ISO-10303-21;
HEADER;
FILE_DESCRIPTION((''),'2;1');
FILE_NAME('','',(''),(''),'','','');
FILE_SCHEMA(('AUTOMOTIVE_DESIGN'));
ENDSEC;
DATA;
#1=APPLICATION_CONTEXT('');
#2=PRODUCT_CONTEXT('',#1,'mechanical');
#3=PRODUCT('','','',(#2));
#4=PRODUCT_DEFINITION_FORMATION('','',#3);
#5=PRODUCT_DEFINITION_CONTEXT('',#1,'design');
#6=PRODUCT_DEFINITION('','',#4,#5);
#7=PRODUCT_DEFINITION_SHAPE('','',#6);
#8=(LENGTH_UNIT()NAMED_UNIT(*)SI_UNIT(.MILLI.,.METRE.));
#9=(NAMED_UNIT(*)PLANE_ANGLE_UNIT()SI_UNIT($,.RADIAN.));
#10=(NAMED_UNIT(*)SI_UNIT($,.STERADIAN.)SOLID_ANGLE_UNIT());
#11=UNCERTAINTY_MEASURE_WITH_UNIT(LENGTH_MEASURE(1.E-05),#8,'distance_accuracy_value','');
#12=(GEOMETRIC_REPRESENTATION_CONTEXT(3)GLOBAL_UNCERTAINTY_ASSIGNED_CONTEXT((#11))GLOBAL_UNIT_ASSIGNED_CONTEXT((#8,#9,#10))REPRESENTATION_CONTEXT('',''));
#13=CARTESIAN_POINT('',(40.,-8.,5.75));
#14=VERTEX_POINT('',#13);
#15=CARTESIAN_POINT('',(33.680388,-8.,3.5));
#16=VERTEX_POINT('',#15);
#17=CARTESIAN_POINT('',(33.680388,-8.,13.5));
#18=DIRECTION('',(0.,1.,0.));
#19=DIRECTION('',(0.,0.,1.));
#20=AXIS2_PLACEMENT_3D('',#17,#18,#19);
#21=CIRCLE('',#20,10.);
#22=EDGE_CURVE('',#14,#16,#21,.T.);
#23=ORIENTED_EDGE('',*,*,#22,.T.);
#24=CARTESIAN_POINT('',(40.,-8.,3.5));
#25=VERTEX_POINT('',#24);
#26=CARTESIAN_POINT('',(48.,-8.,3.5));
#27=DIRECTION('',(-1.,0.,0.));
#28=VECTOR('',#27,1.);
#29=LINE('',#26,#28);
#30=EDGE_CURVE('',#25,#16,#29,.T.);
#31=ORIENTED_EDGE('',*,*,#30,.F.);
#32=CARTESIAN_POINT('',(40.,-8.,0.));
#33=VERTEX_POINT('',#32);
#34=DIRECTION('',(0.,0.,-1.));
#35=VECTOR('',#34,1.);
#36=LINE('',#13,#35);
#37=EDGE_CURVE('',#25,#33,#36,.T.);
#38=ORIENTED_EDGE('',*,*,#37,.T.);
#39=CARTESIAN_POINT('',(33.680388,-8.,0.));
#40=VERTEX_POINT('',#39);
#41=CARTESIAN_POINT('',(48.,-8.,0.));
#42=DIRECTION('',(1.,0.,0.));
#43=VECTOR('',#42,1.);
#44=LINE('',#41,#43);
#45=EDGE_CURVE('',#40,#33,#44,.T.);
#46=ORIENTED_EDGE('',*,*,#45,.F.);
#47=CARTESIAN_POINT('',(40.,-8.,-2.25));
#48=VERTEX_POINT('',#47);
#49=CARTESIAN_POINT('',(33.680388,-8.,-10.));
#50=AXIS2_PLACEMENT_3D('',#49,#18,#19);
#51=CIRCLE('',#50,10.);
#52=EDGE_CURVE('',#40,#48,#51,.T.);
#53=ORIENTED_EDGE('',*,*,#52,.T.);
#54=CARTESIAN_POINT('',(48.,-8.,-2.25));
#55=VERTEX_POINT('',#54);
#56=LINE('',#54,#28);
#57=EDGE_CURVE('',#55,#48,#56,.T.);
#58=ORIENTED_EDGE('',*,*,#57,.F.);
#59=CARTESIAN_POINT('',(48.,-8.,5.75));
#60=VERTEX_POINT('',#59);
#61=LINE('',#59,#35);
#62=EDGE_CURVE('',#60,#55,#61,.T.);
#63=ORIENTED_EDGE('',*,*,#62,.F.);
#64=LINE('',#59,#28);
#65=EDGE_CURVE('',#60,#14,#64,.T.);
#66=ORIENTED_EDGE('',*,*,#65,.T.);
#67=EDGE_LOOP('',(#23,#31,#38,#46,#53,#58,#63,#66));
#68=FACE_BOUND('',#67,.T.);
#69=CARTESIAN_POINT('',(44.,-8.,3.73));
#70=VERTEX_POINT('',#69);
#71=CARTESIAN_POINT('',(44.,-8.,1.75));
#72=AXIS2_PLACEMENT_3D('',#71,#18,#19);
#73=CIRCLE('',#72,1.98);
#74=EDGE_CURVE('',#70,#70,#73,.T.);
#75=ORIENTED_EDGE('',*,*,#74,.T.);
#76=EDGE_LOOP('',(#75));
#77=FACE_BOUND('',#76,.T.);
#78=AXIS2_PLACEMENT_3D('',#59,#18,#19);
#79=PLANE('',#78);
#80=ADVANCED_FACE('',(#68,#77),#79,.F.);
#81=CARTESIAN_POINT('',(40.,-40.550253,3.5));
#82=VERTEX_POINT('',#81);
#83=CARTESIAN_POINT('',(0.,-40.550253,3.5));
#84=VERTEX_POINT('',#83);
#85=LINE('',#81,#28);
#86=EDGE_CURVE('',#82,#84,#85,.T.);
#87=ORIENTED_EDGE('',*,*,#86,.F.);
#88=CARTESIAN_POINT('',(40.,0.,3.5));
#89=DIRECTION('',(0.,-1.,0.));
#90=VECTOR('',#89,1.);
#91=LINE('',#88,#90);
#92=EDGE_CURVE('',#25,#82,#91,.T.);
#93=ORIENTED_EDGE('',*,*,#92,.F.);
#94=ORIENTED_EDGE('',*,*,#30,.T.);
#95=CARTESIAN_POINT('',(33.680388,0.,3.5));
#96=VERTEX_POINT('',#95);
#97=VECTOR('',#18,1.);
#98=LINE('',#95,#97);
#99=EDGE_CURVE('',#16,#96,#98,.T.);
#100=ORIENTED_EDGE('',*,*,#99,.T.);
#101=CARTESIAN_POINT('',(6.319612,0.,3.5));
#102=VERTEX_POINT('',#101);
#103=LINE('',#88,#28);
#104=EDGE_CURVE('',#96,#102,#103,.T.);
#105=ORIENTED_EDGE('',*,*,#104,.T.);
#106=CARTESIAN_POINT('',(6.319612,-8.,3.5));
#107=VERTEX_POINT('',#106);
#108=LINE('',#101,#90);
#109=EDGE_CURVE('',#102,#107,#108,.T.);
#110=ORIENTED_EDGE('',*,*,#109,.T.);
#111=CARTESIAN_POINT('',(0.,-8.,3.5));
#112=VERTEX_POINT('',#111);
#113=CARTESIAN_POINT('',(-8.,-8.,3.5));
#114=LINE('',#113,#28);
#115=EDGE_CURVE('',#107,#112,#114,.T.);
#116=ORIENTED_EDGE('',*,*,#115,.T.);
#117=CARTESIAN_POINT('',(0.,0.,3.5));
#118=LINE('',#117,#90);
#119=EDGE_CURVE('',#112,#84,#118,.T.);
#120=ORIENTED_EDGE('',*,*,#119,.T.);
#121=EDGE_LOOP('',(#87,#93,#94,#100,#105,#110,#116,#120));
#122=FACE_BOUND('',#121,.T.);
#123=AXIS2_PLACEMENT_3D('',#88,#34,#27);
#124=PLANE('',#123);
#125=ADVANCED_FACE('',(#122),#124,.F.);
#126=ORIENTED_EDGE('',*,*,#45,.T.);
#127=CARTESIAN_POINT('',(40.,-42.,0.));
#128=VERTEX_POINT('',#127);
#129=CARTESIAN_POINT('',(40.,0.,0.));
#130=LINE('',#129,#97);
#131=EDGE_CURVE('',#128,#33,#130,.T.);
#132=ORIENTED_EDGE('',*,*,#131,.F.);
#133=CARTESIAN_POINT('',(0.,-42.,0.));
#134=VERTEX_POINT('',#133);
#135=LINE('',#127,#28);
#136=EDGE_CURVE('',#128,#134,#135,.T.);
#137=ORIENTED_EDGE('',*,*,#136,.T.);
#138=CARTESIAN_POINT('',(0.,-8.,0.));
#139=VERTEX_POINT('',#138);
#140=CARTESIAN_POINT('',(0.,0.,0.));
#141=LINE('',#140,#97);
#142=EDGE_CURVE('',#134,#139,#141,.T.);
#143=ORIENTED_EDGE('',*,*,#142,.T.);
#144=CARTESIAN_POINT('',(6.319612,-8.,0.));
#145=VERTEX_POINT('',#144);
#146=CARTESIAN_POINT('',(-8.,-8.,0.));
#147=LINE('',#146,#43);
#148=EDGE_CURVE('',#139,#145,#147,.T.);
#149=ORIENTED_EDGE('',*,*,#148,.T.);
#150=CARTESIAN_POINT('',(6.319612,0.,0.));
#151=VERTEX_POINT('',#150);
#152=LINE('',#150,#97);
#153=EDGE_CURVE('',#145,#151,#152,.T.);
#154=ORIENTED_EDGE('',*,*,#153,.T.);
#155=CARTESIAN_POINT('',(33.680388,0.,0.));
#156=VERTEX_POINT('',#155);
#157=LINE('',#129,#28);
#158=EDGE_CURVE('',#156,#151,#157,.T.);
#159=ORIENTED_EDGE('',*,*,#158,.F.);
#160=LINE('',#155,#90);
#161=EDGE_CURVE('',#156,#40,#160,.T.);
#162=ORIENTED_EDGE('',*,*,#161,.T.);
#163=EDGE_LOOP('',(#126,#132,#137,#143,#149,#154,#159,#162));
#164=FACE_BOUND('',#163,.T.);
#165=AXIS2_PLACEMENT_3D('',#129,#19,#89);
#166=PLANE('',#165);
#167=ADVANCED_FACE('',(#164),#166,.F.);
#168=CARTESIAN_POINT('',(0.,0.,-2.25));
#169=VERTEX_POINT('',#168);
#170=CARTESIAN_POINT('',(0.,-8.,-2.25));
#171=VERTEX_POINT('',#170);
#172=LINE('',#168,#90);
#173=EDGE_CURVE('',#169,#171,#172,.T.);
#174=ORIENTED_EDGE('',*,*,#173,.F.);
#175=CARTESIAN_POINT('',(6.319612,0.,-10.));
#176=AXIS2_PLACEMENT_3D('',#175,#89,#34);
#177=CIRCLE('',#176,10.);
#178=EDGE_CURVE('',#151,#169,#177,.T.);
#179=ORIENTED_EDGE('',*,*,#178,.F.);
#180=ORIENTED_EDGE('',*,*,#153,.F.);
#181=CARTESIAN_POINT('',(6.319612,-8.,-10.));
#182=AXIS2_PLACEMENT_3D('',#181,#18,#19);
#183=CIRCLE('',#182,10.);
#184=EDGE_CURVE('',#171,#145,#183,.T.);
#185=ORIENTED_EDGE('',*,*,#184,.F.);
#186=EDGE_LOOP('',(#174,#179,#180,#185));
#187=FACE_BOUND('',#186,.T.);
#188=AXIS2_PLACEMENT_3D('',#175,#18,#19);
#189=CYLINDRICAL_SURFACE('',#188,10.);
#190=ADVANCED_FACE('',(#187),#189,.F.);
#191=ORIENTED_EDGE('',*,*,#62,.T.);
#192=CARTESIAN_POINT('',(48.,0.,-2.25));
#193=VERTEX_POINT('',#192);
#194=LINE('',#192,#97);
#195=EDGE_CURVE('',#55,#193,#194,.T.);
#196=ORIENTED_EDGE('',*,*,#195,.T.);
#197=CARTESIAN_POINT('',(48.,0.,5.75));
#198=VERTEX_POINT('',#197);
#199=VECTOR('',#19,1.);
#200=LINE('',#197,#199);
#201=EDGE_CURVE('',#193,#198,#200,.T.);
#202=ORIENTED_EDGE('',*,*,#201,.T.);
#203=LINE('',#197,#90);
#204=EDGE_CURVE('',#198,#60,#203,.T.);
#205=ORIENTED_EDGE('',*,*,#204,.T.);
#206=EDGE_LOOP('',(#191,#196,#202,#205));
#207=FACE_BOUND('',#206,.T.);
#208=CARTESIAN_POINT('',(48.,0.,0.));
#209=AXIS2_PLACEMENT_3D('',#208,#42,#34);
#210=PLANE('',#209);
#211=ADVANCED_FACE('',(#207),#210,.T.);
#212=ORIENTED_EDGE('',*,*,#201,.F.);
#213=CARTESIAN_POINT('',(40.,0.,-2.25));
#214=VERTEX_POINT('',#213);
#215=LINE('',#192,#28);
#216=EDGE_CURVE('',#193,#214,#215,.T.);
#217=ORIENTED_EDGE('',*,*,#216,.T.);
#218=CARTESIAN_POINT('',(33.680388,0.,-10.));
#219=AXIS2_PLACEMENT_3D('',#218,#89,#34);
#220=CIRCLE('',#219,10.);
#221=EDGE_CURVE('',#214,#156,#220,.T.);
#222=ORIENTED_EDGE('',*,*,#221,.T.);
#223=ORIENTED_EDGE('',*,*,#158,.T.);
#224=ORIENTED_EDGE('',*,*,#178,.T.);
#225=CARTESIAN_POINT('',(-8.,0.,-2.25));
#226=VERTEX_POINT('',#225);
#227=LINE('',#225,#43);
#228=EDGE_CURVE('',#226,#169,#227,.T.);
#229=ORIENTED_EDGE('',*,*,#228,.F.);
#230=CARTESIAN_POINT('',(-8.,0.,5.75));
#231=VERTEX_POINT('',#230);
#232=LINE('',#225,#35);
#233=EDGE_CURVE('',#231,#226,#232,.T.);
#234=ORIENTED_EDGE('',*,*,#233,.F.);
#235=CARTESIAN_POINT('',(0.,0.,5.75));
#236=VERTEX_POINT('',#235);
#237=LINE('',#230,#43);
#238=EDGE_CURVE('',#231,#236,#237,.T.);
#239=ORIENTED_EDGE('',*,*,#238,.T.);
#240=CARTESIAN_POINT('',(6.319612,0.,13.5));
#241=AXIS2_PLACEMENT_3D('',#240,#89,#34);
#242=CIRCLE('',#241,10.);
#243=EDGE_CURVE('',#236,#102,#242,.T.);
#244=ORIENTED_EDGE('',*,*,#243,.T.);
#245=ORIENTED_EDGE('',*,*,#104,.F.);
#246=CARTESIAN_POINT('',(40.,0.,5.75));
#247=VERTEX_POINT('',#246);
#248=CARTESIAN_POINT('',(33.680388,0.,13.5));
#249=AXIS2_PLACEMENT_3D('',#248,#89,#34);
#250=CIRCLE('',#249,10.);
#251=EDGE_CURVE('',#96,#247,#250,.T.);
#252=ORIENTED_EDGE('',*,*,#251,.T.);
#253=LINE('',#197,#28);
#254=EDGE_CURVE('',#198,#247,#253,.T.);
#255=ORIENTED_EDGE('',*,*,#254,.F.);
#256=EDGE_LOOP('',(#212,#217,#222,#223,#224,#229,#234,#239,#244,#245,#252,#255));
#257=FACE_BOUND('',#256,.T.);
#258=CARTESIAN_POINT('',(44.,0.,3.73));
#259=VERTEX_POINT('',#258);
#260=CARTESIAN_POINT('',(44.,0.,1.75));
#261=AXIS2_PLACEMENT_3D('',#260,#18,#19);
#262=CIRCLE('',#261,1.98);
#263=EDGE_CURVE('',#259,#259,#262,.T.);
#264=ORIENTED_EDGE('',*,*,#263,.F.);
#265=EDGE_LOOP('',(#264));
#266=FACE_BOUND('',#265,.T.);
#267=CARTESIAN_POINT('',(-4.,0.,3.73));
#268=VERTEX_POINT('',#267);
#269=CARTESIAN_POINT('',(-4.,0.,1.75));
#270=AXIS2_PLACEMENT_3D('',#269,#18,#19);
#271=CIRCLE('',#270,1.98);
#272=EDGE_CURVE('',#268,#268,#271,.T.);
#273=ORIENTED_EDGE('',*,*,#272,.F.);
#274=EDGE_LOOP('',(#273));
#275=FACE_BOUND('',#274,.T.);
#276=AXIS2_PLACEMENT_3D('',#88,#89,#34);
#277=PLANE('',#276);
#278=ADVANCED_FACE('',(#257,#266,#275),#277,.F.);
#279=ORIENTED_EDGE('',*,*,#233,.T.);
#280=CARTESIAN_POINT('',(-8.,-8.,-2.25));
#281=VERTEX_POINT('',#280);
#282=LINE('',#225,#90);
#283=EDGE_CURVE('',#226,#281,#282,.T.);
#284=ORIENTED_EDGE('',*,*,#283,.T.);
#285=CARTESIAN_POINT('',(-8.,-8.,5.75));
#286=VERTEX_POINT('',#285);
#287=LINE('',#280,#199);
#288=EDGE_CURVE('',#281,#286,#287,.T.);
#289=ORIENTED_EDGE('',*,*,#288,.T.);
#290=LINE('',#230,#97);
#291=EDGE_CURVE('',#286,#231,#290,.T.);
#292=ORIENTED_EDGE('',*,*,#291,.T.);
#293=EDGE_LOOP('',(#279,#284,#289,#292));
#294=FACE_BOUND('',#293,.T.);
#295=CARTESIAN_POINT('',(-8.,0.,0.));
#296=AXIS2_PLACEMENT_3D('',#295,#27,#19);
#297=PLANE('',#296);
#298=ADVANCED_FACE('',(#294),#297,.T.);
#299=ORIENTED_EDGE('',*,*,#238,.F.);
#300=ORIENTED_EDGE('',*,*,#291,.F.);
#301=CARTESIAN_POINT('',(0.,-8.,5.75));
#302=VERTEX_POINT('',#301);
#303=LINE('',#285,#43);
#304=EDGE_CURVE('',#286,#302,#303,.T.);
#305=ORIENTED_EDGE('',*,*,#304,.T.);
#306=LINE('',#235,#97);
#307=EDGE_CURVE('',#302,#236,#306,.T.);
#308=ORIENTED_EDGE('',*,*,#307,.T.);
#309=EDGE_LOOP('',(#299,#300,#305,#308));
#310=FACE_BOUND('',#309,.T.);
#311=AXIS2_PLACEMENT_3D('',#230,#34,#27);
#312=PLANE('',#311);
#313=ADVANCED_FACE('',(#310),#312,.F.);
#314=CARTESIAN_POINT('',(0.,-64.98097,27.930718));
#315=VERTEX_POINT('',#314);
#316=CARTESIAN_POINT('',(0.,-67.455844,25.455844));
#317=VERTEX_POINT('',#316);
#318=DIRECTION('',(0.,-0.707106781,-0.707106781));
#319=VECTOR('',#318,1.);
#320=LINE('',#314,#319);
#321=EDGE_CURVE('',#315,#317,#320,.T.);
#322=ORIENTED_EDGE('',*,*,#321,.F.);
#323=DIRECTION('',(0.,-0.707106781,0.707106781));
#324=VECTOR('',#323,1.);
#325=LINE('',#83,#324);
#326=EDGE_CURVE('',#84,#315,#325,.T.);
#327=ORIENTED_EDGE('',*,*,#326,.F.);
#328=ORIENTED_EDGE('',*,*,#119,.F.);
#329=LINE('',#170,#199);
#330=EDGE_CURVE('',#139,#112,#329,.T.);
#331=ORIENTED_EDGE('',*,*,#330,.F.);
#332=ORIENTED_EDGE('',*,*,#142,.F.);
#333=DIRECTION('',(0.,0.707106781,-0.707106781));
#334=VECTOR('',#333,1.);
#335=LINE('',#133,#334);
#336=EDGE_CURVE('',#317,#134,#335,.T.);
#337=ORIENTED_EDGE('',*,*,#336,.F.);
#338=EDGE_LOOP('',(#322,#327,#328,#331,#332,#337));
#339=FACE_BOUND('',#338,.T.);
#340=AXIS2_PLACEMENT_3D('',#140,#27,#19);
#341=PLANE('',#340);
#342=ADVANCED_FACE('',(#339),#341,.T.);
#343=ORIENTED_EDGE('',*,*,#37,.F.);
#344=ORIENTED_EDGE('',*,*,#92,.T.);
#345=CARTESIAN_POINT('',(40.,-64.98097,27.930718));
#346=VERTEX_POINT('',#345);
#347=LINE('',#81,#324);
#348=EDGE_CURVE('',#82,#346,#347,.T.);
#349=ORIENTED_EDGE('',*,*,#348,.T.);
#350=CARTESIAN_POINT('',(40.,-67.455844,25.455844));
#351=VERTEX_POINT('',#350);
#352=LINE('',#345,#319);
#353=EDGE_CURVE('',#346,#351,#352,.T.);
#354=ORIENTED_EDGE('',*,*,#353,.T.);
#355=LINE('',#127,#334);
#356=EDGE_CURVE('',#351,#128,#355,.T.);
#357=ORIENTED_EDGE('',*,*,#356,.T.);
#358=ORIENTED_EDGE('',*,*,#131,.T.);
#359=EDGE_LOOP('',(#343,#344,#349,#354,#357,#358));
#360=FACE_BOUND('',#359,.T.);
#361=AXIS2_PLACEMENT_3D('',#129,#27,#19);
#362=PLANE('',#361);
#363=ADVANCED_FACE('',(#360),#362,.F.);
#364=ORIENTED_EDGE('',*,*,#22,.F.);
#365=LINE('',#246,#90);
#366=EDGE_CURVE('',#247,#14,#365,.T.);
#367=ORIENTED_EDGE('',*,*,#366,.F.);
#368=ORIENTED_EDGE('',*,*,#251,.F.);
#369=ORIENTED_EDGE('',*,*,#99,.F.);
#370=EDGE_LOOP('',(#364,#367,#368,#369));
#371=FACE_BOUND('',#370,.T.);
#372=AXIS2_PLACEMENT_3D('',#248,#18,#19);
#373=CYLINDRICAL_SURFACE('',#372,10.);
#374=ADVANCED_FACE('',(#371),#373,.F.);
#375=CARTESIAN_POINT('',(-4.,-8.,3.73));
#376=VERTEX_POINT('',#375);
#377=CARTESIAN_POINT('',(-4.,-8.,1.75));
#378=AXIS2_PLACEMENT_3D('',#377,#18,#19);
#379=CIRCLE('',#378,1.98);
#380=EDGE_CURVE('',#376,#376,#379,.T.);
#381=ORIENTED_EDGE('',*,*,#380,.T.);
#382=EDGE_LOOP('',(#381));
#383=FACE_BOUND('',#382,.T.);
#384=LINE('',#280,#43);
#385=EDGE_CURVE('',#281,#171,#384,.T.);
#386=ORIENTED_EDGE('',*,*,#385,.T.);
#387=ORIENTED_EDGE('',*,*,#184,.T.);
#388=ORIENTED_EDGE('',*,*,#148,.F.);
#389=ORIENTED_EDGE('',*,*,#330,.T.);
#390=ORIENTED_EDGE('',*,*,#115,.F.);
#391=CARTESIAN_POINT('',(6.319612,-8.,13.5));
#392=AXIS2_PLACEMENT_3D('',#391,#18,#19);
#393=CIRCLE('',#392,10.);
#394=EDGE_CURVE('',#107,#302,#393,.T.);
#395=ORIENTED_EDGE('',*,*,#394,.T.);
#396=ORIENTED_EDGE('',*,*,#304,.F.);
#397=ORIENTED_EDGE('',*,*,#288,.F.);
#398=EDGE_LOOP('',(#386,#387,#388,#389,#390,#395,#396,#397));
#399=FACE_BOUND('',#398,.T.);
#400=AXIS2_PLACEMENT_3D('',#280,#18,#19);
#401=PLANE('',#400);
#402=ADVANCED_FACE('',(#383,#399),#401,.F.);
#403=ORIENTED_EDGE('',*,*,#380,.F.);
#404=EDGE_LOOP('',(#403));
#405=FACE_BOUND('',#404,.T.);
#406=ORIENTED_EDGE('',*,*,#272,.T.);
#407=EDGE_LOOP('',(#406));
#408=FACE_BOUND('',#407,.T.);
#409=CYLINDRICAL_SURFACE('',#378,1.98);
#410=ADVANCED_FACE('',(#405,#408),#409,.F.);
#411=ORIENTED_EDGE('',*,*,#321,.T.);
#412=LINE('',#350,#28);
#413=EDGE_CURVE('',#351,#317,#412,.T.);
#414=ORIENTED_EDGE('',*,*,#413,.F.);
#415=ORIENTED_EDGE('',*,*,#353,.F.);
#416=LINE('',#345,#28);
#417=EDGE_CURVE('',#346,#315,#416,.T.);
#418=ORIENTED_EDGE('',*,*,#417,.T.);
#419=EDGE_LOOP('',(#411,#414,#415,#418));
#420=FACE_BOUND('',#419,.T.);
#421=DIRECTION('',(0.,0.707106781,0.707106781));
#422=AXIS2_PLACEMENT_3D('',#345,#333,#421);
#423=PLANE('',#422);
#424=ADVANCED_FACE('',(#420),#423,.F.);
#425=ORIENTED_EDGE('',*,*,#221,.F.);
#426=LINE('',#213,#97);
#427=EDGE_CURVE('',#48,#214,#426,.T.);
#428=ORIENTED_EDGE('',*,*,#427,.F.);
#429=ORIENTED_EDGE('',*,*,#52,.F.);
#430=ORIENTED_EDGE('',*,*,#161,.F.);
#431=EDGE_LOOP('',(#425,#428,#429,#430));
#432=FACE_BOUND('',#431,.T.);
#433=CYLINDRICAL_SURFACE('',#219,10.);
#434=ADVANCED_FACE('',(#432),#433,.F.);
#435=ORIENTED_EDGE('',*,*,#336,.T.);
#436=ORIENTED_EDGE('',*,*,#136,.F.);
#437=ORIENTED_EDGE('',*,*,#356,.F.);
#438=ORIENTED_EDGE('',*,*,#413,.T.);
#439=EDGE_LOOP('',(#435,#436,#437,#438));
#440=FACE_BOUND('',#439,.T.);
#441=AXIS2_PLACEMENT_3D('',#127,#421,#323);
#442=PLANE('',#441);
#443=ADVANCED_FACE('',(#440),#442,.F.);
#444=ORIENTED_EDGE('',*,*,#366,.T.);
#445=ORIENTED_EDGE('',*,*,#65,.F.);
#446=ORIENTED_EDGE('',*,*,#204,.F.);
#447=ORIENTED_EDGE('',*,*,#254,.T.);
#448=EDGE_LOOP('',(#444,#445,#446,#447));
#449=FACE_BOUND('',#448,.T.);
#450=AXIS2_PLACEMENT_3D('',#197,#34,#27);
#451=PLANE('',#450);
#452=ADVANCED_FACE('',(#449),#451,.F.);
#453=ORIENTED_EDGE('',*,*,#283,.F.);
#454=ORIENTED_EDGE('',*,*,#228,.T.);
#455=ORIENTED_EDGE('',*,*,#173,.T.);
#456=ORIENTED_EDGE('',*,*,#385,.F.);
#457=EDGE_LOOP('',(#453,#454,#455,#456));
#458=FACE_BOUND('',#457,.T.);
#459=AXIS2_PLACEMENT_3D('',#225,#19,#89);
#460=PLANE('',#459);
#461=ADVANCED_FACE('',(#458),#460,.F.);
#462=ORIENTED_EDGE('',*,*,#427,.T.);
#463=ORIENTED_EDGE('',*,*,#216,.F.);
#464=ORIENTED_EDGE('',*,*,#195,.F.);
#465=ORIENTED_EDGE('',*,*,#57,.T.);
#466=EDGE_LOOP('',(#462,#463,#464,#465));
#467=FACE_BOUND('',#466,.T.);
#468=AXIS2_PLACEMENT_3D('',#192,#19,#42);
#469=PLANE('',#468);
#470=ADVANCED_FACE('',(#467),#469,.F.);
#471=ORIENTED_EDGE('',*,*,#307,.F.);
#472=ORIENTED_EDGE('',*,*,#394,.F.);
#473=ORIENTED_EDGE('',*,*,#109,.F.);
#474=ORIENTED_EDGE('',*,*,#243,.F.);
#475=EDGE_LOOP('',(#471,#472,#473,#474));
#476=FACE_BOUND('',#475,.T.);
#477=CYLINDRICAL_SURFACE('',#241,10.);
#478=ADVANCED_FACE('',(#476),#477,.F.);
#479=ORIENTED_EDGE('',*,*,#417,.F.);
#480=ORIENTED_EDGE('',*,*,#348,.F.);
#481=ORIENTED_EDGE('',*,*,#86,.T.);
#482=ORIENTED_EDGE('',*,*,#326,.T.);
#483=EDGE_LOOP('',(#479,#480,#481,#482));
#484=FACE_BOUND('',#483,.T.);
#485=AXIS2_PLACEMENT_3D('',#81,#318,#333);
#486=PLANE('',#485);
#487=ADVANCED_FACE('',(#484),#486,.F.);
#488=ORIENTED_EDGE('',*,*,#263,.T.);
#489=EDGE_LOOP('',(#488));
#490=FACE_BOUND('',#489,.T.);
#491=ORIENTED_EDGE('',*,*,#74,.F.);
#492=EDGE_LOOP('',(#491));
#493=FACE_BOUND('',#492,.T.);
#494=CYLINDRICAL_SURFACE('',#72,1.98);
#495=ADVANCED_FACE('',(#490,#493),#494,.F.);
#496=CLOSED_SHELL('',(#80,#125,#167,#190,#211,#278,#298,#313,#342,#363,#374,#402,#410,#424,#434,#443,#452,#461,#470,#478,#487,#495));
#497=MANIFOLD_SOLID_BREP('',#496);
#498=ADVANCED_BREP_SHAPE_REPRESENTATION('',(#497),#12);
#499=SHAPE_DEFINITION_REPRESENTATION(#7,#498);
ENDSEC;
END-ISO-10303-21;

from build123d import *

# Parameters (mm, degrees)
EXTRUDE_1_DEPTH     = 40
SKETCH_4_W          = 8
SKETCH_4_H          = 8
EXTRUDE_2_DEPTH     = 8
SKETCH_5_R          = 1.98
CUT_EXTRUDE_2_DEPTH = 8
FILLET_1_R          = 10
FILLET_2_R          = 10
SKETCH_6_W          = 8
SKETCH_6_H          = 8
EXTRUDE_3_DEPTH     = 8
SKETCH_7_R          = 1.98
CUT_EXTRUDE_3_DEPTH = 8
FILLET_3_R          = 10
FILLET_4_R          = 10


with BuildPart() as part:
    # 草图2 → 凸台-拉伸1 (new body)
    with BuildSketch(Plane(origin=(0, 0, 0), x_dir=(0, 0, -1), z_dir=(1, 0, 0))):
        Polygon((0, 0), (0, -42), (-25.455844123, -67.455844123), (-27.930717857, -64.980970389), (-3.5, -40.550252532), (-3.5, 0), align=None)
    extrude(amount=EXTRUDE_1_DEPTH)

    # 草图4 → 凸台-拉伸2 (add)
    with BuildSketch(Plane.ZY):
        with Locations((1.75, -4)):
            Rectangle(SKETCH_4_W, SKETCH_4_H)
    extrude(amount=EXTRUDE_2_DEPTH)

    # 草图5 → 切除-拉伸2 (cut)
    with BuildSketch(Plane(origin=(0, 0, 0), x_dir=(1, 0, 0), z_dir=(0, 1, 0))):
        with Locations(Location((-4, -1.75, 0), (0, 0, 270))):
            Circle(SKETCH_5_R)
    extrude(amount=-CUT_EXTRUDE_2_DEPTH, mode=Mode.SUBTRACT)

    # 圆角1
    # the kernel refuses this fillet: 10 mm, written as the material it adds along each edge
    with BuildSketch(Plane(origin=(0, 0, 0), x_dir=(1, 0, 0), z_dir=(0, -1, 0))) as fillet_1_piece_1:
        with BuildLine():
            CenterArc((6.31961233, -10), FILLET_1_R, 90, 39.194967426)
            Line((0, -2.25), (0, 0))
            Line((0, 0), (6.31961233, 0))
        make_face()
    extrude(amount=8)

    # 圆角2
    # the kernel refuses this fillet: 10 mm, written as the material it adds along each edge
    with BuildSketch(Plane(origin=(0, -8, 3.5), x_dir=(1, 0, 0), z_dir=(0, 1, 0))) as fillet_2_piece_1:
        with BuildLine():
            CenterArc((6.31961233, -10), FILLET_2_R, 90, 39.194967426)
            Line((0, -2.25), (0, 0))
            Line((0, 0), (6.31961233, 0))
        make_face()
    extrude(amount=8)

    # 草图6 → 凸台-拉伸3 (add)
    with BuildSketch(Plane(origin=(40, 0, 0), x_dir=(0, 0, -1), z_dir=(1, 0, 0))):
        with Locations((-1.75, -4)):
            Rectangle(SKETCH_6_W, SKETCH_6_H)
    extrude(amount=EXTRUDE_3_DEPTH)

    # 草图7 → 切除-拉伸3 (cut)
    with BuildSketch(Plane(origin=(0, 0, 0), x_dir=(1, 0, 0), z_dir=(0, 1, 0))):
        with Locations(Location((44, -1.75, 0), (0, 0, 270))):
            Circle(SKETCH_7_R)
    extrude(amount=-CUT_EXTRUDE_3_DEPTH, mode=Mode.SUBTRACT)

    # 圆角3
    # the kernel refuses this fillet: 10 mm, written as the material it adds along each edge
    with BuildSketch(Plane(origin=(40, 0, 0), x_dir=(-1, 0, 0), z_dir=(0, -1, 0))) as fillet_3_piece_1:
        with BuildLine():
            CenterArc((6.31961233, 10), FILLET_3_R, 230.805032574, 39.194967426)
            Line((0, 2.25), (0, 0))
            Line((0, 0), (6.31961233, 0))
        make_face()
    extrude(amount=8)

    # 圆角4
    # the kernel refuses this fillet: 10 mm, written as the material it adds along each edge
    with BuildSketch(Plane(origin=(40, -8, 3.5), x_dir=(-1, 0, 0), z_dir=(0, 1, 0))) as fillet_4_piece_1:
        with BuildLine():
            CenterArc((6.31961233, 10), FILLET_4_R, 230.805032574, 39.194967426)
            Line((0, 2.25), (0, 0))
            Line((0, 0), (6.31961233, 0))
        make_face()
    extrude(amount=8)


solid = part.part
